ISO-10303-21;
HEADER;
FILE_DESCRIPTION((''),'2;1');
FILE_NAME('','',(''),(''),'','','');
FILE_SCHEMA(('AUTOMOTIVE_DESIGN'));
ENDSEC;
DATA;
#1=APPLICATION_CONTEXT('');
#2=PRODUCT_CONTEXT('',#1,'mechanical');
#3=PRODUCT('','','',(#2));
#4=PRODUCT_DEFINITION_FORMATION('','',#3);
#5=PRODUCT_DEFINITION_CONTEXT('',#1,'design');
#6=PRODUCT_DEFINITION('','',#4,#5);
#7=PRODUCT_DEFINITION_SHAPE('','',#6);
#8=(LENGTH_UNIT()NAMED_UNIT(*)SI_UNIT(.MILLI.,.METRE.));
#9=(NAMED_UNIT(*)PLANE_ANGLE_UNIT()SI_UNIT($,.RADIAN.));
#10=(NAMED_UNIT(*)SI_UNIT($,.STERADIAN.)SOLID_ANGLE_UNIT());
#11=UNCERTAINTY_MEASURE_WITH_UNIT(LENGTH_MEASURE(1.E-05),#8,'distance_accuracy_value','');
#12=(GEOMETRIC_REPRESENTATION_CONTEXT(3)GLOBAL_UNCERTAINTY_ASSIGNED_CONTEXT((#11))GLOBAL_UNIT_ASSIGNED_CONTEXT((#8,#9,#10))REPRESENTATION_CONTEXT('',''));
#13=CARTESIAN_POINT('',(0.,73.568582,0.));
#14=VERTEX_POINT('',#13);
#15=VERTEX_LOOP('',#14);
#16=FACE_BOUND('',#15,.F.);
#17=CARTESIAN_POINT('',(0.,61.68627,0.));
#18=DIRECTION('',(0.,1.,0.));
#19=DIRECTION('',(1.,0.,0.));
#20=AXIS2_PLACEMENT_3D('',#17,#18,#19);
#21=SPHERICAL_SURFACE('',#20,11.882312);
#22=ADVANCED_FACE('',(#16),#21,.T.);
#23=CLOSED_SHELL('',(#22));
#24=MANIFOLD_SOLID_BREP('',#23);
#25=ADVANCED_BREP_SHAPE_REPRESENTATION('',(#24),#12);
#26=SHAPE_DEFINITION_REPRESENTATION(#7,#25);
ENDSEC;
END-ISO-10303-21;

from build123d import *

# Parameters (mm, degrees)
F6_W     = 6.0810809955
F6_H     = 35.6756746769
F7_DEPTH = 39.5


# Not quite as in the source:
# - the program builds the solid bodies; features that only make, move or delete a surface that nothing else refers to are left out


with BuildPart() as f5:
    # F4 (on Top) → F5 (revolve)
    with BuildSketch(Plane.XY):
        with BuildLine():
            Line((0, 73.5685819782), (0, 49.8039578997))
            ThreePointArc((0, 49.8039578997), (11.8823120393, 61.6862699389), (0, 73.5685819782))
        make_face()
    revolve(axis=Axis((0, 10.8100157231, 0), (0, -1, 0)))

    # F6 (on Right) → F7 (cut, symmetric)
    with BuildSketch(Plane.YZ):
        with Locations((14.0385185368, 40.8424846828)):
            Rectangle(F6_W, F6_H)
    extrude(amount=F7_DEPTH, both=True, mode=Mode.SUBTRACT)


solid = f5.part
